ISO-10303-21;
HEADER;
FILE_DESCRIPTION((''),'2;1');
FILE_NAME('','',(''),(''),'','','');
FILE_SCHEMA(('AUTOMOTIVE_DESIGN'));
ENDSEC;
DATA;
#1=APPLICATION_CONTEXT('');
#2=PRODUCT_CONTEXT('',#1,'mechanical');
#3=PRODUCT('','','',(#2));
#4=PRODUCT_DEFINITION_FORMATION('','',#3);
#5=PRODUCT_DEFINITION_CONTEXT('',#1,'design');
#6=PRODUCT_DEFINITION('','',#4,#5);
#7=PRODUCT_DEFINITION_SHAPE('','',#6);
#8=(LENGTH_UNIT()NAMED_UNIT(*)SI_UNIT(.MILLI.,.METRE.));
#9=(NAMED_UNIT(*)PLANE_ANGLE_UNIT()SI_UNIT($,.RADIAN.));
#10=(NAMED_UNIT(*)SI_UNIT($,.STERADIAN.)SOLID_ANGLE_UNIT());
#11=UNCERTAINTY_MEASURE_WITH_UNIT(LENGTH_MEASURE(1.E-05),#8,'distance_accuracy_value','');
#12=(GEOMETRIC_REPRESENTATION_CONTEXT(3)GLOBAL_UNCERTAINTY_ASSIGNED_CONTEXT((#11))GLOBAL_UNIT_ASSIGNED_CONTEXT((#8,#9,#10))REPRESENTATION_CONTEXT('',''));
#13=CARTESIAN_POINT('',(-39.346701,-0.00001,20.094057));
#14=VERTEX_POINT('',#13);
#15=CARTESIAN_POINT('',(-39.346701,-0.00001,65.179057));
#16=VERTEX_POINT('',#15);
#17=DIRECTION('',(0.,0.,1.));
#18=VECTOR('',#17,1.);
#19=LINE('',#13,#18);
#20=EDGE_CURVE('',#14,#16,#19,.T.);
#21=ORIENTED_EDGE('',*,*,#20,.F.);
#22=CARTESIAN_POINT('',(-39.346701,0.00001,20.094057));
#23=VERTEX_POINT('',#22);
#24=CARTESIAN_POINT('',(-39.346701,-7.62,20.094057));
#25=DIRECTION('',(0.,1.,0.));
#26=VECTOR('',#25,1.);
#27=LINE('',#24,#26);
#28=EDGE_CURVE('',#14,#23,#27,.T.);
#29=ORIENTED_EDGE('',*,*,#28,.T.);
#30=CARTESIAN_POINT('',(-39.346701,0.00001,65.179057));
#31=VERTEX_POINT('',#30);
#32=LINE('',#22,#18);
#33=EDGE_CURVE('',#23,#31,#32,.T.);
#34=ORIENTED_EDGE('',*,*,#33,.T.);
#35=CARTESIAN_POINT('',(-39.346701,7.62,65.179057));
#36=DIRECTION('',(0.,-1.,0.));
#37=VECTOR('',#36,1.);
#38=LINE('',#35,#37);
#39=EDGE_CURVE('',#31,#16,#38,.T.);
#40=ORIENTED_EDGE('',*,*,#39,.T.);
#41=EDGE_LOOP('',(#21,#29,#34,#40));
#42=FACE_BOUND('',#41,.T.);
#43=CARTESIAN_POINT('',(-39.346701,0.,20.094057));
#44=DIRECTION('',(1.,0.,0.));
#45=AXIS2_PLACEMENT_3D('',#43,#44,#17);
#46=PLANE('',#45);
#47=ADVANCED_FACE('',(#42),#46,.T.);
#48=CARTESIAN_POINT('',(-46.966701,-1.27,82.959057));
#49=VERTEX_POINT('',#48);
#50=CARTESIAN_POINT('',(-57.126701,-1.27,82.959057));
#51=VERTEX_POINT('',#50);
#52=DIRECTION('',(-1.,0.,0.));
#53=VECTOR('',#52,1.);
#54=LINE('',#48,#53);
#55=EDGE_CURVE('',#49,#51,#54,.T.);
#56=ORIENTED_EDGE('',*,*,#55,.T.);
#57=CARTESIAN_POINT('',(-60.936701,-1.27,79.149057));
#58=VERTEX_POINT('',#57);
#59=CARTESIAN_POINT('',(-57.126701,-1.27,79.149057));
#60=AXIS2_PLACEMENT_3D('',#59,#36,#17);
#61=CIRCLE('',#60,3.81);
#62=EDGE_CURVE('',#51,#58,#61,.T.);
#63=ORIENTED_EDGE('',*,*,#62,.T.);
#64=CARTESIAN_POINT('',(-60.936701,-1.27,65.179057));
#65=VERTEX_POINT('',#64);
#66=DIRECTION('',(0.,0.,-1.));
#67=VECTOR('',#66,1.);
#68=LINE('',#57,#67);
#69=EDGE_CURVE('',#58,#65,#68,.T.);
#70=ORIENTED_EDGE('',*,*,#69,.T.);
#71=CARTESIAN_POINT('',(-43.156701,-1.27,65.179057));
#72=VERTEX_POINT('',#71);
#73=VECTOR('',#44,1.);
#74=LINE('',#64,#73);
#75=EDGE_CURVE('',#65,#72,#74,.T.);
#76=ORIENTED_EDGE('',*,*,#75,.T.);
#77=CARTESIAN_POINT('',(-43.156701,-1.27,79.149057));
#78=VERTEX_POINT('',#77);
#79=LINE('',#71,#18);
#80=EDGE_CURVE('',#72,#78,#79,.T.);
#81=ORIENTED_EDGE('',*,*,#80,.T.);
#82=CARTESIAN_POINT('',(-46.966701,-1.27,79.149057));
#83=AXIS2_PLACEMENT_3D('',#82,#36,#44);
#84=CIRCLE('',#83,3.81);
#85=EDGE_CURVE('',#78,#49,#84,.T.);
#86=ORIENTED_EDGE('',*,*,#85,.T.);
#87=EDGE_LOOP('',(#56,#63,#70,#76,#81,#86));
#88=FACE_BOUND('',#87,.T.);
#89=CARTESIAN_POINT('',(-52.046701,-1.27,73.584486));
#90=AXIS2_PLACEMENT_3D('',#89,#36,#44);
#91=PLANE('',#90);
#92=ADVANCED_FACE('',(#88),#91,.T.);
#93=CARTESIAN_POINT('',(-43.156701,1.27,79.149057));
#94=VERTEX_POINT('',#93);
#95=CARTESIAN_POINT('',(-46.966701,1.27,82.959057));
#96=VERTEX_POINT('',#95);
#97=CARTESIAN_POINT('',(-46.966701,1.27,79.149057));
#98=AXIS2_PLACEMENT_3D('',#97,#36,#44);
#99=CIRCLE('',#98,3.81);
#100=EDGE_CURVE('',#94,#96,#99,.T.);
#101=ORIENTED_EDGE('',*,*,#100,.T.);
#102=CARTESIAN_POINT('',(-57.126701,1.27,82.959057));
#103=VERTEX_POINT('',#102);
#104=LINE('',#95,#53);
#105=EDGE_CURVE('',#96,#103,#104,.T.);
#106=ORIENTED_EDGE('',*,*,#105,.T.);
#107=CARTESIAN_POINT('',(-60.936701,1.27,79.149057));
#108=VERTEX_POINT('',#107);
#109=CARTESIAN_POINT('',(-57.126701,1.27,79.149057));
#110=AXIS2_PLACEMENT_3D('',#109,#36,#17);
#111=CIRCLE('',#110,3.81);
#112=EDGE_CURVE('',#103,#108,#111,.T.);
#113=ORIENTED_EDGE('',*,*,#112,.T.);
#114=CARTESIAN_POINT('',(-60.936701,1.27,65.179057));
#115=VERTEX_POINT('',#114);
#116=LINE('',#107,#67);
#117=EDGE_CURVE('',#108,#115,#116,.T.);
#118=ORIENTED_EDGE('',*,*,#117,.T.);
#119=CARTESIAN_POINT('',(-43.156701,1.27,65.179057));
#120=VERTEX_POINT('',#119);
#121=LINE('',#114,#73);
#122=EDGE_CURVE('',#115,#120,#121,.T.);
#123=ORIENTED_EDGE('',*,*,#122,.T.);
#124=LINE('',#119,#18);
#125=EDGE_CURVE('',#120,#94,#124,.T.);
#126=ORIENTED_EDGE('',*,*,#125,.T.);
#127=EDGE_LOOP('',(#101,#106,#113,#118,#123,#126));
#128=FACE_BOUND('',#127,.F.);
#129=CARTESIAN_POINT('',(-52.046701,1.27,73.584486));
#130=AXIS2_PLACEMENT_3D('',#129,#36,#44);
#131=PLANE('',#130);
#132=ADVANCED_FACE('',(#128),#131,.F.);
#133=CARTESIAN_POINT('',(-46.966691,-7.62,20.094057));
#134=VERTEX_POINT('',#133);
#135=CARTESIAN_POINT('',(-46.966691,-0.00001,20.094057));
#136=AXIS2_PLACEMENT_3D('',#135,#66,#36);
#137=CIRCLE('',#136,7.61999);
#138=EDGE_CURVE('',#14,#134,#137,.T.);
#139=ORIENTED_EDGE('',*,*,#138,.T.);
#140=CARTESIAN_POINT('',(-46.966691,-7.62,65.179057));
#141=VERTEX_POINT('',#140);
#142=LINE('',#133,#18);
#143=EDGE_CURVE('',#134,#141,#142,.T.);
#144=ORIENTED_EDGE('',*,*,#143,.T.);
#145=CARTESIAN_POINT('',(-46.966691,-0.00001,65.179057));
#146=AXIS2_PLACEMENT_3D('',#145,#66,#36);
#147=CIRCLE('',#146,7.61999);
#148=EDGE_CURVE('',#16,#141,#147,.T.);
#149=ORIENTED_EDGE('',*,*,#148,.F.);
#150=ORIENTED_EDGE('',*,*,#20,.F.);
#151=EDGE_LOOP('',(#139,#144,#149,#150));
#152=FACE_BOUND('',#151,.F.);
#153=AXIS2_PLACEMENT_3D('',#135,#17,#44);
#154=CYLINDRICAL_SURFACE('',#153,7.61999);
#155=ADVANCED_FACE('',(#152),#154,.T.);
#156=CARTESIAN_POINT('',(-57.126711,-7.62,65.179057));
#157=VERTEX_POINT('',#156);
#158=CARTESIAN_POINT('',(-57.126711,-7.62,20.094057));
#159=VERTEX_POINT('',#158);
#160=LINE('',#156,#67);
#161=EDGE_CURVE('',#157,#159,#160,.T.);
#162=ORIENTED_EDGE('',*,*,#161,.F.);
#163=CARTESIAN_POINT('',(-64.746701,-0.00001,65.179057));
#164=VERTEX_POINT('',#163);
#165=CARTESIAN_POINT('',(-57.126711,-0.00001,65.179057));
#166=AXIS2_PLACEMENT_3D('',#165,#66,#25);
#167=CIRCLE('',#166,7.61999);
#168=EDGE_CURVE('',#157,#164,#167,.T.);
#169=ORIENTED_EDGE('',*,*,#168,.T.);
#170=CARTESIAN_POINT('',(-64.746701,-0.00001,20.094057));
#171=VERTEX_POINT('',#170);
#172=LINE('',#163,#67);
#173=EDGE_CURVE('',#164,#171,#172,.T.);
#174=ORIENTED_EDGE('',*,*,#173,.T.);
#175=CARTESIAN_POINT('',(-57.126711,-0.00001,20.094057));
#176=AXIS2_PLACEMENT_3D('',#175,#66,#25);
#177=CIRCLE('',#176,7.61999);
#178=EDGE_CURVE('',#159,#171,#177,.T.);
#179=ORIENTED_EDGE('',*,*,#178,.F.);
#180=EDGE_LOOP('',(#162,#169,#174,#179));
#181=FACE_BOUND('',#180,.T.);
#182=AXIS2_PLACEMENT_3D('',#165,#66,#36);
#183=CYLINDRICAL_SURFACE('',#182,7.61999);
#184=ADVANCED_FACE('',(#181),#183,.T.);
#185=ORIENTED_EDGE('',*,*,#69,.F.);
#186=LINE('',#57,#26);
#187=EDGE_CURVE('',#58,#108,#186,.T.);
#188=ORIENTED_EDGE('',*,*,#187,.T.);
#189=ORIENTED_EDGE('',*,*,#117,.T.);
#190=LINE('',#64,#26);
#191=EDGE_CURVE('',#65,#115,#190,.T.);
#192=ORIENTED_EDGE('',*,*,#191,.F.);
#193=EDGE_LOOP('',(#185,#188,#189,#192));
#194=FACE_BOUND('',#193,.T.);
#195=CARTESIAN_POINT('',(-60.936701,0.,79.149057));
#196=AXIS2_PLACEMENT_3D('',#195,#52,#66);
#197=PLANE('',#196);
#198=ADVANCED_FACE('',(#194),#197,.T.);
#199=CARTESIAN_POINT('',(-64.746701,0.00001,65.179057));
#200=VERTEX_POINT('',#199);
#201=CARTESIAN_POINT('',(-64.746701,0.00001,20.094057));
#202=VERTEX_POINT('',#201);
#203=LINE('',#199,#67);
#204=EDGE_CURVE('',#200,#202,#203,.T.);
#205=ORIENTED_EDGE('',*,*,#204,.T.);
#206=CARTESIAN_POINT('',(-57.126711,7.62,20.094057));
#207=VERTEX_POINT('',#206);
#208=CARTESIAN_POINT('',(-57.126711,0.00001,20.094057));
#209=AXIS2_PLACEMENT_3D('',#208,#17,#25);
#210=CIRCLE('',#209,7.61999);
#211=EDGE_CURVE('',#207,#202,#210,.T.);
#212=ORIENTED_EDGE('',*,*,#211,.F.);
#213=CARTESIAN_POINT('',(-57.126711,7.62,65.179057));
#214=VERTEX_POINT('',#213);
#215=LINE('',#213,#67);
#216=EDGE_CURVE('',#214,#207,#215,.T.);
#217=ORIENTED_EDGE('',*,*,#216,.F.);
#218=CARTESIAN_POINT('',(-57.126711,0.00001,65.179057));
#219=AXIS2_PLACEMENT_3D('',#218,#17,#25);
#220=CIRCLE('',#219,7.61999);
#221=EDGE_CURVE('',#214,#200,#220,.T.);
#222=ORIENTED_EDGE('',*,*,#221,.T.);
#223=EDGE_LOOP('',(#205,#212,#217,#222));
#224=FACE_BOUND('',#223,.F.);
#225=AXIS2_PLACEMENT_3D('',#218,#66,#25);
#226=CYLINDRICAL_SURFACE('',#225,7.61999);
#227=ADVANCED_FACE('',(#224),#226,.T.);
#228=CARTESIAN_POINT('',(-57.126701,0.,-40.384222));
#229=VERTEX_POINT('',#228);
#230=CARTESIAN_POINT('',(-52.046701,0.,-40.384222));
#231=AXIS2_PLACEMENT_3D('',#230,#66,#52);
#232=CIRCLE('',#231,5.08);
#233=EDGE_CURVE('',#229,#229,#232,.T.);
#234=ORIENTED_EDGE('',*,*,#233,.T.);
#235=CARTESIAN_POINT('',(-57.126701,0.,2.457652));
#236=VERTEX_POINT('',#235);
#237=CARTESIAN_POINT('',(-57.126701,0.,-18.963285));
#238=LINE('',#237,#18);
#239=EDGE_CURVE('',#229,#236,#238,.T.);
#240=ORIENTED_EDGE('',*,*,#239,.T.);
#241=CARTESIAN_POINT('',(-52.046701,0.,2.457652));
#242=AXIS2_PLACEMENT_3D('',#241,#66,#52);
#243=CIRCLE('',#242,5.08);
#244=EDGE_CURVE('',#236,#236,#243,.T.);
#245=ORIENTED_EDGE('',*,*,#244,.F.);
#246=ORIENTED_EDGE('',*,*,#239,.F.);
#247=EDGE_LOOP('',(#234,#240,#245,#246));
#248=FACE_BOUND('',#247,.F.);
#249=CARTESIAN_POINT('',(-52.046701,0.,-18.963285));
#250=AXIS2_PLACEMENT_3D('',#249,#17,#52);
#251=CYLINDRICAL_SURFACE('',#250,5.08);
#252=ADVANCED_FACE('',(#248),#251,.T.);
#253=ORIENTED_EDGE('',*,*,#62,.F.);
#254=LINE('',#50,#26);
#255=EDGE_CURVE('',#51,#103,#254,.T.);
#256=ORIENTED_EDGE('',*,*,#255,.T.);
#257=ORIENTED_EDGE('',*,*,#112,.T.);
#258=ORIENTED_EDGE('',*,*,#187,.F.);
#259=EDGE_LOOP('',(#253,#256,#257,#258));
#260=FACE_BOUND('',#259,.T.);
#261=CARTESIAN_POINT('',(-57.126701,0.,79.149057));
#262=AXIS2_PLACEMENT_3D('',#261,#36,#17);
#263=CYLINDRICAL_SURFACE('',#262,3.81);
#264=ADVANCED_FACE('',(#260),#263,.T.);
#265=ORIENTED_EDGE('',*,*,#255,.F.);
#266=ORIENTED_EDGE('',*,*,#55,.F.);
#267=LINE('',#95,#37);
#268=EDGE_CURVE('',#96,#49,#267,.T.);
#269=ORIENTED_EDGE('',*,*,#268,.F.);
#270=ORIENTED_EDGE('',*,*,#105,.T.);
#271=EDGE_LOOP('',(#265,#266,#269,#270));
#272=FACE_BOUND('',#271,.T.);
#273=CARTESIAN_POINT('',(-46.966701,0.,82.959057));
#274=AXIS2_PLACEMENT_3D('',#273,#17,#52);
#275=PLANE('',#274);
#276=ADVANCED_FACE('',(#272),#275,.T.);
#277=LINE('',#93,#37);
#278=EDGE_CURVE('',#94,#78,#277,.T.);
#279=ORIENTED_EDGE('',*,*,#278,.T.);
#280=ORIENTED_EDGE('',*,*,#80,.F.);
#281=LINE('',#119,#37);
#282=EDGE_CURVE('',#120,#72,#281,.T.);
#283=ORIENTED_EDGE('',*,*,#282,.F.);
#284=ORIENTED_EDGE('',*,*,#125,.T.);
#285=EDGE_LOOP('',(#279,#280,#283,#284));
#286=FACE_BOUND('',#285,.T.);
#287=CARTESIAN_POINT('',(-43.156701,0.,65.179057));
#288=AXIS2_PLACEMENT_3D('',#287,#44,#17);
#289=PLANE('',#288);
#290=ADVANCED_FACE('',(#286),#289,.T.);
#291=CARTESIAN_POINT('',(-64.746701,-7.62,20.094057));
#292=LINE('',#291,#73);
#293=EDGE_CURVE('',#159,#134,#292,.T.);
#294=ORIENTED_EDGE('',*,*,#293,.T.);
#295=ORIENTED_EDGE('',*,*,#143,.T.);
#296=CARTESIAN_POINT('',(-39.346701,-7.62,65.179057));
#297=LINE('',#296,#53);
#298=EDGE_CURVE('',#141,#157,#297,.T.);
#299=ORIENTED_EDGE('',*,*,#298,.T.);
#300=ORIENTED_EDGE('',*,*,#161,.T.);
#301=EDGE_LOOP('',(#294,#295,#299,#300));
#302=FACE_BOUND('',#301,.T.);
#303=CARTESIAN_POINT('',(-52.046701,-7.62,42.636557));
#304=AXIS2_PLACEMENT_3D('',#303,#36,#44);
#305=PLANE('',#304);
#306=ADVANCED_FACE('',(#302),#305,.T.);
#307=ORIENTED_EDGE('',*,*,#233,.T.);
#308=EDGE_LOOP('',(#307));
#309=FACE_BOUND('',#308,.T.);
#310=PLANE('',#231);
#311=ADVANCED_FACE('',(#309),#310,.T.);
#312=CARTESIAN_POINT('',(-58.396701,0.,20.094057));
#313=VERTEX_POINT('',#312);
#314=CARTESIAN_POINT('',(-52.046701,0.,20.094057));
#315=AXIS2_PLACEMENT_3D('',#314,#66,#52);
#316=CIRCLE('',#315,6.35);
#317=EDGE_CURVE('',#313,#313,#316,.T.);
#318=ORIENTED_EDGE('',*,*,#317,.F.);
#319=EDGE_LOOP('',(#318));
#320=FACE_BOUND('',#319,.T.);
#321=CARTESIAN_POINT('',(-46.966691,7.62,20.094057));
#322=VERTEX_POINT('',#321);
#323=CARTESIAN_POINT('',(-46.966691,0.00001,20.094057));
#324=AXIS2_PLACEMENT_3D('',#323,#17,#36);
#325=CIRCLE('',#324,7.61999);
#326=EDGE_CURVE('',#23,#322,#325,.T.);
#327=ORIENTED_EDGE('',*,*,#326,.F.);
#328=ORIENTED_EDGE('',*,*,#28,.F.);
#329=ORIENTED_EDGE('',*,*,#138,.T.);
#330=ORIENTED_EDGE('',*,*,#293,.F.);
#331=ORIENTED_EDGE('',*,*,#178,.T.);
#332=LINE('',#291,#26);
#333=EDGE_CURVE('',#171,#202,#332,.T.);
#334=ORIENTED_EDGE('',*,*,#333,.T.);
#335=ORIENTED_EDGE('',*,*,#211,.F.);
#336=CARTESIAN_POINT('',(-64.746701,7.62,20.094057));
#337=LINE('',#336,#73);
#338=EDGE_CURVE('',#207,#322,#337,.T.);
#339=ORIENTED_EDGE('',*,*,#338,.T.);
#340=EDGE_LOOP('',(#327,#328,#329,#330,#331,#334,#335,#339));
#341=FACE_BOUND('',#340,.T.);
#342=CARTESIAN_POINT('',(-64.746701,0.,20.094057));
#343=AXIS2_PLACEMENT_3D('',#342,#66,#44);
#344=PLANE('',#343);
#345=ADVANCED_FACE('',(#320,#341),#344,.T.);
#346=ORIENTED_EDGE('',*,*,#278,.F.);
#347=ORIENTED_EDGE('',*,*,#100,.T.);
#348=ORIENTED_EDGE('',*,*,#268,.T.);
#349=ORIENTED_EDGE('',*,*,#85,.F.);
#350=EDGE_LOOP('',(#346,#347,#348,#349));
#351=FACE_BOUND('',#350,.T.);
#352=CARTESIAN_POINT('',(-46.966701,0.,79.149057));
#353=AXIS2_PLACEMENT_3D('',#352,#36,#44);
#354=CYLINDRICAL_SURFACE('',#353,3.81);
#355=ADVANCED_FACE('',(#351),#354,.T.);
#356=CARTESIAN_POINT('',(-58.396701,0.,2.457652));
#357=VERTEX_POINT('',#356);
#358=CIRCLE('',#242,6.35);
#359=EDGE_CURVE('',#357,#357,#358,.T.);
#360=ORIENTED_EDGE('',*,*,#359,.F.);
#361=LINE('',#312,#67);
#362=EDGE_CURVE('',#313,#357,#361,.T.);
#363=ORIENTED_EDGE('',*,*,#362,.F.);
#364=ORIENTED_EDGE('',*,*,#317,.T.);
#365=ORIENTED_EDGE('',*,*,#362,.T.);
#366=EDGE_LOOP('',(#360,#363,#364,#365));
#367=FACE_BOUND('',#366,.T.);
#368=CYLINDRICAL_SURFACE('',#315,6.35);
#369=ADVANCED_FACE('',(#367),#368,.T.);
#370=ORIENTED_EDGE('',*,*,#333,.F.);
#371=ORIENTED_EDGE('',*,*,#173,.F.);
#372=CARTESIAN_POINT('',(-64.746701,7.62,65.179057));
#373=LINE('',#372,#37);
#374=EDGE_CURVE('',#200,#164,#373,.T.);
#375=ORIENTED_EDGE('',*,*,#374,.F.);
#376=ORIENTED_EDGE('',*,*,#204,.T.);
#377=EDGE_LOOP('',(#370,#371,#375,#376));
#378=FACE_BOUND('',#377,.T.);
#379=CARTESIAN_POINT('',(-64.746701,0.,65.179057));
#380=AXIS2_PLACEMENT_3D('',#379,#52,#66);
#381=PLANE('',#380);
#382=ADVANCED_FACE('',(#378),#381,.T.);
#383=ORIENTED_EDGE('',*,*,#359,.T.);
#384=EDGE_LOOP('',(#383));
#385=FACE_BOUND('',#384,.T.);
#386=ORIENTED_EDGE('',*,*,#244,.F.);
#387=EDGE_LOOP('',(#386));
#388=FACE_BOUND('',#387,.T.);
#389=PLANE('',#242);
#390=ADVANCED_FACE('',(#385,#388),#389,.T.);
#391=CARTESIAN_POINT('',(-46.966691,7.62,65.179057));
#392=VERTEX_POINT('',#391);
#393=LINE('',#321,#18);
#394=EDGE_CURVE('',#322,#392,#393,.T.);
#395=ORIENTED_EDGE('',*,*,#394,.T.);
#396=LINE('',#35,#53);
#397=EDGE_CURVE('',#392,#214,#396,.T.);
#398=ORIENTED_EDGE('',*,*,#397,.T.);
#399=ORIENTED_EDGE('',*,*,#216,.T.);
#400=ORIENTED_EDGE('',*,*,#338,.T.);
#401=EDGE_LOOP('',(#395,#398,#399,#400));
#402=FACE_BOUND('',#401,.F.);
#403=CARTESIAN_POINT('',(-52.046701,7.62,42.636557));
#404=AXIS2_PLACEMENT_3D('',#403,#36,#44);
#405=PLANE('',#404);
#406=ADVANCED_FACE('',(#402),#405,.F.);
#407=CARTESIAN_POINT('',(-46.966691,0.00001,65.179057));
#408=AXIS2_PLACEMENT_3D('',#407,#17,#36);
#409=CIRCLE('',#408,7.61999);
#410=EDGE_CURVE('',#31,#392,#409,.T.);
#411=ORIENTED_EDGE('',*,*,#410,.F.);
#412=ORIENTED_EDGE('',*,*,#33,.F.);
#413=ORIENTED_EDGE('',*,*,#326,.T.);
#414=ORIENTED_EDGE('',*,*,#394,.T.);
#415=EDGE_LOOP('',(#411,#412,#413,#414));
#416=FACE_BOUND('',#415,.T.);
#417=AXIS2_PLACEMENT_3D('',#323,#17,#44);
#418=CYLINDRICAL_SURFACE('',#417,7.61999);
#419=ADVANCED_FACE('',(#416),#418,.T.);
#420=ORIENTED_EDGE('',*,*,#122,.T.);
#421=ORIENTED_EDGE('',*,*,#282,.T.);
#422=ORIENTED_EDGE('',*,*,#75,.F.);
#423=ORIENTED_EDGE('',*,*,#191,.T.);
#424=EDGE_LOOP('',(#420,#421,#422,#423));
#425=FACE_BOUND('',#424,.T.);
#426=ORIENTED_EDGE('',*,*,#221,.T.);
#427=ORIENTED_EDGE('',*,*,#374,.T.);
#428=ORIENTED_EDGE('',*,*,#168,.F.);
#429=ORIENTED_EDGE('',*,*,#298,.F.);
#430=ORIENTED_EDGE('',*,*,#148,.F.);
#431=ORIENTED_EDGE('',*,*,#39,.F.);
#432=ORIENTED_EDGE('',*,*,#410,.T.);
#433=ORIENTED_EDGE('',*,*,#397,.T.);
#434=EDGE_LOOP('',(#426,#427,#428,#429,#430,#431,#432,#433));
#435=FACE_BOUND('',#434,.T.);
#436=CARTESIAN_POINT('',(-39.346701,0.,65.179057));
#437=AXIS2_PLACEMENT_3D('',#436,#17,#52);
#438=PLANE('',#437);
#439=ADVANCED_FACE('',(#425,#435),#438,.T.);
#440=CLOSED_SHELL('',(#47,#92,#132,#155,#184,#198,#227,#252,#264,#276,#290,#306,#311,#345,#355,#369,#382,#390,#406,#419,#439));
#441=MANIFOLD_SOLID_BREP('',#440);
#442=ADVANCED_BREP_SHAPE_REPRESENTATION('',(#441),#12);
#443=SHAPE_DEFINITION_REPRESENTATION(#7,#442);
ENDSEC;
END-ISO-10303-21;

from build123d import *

# Parameters (mm, degrees)
F1_DEPTH = 7.62
F2_DEPTH = 1.27
F0_W     = 5.08
F0_H     = 42.841874063
F5_R     = 7.61999


# Not quite as in the source:
# - a fillet or chamfer is up to 0.001 mm smaller than in the source, because OpenCascade refuses the exact size


with BuildPart() as f1:
    # F0 (on Front) → F1 (new body, symmetric)
    with BuildSketch(Plane.XZ):
        Polygon((-45.6967013121, 20.0940572381), (-39.3467013121, 20.0940572381), (-39.3467013121, 65.1790572381), (-43.1567013121, 65.1790572381), (-60.9367013121, 65.1790572381), (-64.7467013121, 65.1790572381), (-64.7467013121, 20.0940572381), (-58.3967013121, 20.0940572381), (-52.0467013121, 20.0940572381), align=None)
    extrude(amount=F1_DEPTH, both=True)

    # F0 (on Front) → F2 (join, symmetric)
    with BuildSketch(Plane.XZ):
        with BuildLine():
            Line((-60.9367013121, 65.1790572381), (-43.1567013121, 65.1790572381))
            Line((-43.1567013121, 65.1790572381), (-43.1567013121, 79.1490572381))
            ThreePointArc((-43.1567013121, 79.1490572381), (-44.2726244757, 81.8431340744), (-46.9667013121, 82.9590572381))
            Line((-46.9667013121, 82.9590572381), (-57.1267013121, 82.9590572381))
            ThreePointArc((-57.1267013121, 82.9590572381), (-59.8207781484, 81.8431340744), (-60.9367013121, 79.1490572381))
            Line((-60.9367013121, 79.1490572381), (-60.9367013121, 65.1790572381))
        make_face()
    extrude(amount=F2_DEPTH, both=True)

    # F0 (on Front) → F3 (revolve)
    with BuildSketch(Plane.XZ):
        Polygon((-52.0467013121, 2.457652241), (-52.0467013121, 20.0940572381), (-58.3967013121, 20.0940572381), (-58.3967013121, 2.457652241), (-57.1267013121, 2.457652241), align=None)
    revolve(axis=Axis((-52.0467013121, 0, -10.145082292), (0, 0, -1)))

    # F0 (on Front) → F4 (revolve)
    with BuildSketch(Plane.XZ):
        with Locations((-54.5867013121, -18.9632847905)):
            Rectangle(F0_W, F0_H)
    revolve(axis=Axis((-52.0467013121, 0, -10.145082292), (0, 0, -1)))

    # F5 (radius 7.62 in the source; OpenCascade refuses exactly that, so slightly less here)
    f5_edges = [f1.edges().sort_by_distance(p)[0] for p in [
        (-39.346701, 7.62, 42.636557),
        (-64.746701, 7.62, 42.636557),
        (-64.746701, -7.62, 42.636557),
        (-39.346701, -7.62, 42.636557),
    ]]
    fillet(f5_edges, radius=F5_R)


solid = f1.part
